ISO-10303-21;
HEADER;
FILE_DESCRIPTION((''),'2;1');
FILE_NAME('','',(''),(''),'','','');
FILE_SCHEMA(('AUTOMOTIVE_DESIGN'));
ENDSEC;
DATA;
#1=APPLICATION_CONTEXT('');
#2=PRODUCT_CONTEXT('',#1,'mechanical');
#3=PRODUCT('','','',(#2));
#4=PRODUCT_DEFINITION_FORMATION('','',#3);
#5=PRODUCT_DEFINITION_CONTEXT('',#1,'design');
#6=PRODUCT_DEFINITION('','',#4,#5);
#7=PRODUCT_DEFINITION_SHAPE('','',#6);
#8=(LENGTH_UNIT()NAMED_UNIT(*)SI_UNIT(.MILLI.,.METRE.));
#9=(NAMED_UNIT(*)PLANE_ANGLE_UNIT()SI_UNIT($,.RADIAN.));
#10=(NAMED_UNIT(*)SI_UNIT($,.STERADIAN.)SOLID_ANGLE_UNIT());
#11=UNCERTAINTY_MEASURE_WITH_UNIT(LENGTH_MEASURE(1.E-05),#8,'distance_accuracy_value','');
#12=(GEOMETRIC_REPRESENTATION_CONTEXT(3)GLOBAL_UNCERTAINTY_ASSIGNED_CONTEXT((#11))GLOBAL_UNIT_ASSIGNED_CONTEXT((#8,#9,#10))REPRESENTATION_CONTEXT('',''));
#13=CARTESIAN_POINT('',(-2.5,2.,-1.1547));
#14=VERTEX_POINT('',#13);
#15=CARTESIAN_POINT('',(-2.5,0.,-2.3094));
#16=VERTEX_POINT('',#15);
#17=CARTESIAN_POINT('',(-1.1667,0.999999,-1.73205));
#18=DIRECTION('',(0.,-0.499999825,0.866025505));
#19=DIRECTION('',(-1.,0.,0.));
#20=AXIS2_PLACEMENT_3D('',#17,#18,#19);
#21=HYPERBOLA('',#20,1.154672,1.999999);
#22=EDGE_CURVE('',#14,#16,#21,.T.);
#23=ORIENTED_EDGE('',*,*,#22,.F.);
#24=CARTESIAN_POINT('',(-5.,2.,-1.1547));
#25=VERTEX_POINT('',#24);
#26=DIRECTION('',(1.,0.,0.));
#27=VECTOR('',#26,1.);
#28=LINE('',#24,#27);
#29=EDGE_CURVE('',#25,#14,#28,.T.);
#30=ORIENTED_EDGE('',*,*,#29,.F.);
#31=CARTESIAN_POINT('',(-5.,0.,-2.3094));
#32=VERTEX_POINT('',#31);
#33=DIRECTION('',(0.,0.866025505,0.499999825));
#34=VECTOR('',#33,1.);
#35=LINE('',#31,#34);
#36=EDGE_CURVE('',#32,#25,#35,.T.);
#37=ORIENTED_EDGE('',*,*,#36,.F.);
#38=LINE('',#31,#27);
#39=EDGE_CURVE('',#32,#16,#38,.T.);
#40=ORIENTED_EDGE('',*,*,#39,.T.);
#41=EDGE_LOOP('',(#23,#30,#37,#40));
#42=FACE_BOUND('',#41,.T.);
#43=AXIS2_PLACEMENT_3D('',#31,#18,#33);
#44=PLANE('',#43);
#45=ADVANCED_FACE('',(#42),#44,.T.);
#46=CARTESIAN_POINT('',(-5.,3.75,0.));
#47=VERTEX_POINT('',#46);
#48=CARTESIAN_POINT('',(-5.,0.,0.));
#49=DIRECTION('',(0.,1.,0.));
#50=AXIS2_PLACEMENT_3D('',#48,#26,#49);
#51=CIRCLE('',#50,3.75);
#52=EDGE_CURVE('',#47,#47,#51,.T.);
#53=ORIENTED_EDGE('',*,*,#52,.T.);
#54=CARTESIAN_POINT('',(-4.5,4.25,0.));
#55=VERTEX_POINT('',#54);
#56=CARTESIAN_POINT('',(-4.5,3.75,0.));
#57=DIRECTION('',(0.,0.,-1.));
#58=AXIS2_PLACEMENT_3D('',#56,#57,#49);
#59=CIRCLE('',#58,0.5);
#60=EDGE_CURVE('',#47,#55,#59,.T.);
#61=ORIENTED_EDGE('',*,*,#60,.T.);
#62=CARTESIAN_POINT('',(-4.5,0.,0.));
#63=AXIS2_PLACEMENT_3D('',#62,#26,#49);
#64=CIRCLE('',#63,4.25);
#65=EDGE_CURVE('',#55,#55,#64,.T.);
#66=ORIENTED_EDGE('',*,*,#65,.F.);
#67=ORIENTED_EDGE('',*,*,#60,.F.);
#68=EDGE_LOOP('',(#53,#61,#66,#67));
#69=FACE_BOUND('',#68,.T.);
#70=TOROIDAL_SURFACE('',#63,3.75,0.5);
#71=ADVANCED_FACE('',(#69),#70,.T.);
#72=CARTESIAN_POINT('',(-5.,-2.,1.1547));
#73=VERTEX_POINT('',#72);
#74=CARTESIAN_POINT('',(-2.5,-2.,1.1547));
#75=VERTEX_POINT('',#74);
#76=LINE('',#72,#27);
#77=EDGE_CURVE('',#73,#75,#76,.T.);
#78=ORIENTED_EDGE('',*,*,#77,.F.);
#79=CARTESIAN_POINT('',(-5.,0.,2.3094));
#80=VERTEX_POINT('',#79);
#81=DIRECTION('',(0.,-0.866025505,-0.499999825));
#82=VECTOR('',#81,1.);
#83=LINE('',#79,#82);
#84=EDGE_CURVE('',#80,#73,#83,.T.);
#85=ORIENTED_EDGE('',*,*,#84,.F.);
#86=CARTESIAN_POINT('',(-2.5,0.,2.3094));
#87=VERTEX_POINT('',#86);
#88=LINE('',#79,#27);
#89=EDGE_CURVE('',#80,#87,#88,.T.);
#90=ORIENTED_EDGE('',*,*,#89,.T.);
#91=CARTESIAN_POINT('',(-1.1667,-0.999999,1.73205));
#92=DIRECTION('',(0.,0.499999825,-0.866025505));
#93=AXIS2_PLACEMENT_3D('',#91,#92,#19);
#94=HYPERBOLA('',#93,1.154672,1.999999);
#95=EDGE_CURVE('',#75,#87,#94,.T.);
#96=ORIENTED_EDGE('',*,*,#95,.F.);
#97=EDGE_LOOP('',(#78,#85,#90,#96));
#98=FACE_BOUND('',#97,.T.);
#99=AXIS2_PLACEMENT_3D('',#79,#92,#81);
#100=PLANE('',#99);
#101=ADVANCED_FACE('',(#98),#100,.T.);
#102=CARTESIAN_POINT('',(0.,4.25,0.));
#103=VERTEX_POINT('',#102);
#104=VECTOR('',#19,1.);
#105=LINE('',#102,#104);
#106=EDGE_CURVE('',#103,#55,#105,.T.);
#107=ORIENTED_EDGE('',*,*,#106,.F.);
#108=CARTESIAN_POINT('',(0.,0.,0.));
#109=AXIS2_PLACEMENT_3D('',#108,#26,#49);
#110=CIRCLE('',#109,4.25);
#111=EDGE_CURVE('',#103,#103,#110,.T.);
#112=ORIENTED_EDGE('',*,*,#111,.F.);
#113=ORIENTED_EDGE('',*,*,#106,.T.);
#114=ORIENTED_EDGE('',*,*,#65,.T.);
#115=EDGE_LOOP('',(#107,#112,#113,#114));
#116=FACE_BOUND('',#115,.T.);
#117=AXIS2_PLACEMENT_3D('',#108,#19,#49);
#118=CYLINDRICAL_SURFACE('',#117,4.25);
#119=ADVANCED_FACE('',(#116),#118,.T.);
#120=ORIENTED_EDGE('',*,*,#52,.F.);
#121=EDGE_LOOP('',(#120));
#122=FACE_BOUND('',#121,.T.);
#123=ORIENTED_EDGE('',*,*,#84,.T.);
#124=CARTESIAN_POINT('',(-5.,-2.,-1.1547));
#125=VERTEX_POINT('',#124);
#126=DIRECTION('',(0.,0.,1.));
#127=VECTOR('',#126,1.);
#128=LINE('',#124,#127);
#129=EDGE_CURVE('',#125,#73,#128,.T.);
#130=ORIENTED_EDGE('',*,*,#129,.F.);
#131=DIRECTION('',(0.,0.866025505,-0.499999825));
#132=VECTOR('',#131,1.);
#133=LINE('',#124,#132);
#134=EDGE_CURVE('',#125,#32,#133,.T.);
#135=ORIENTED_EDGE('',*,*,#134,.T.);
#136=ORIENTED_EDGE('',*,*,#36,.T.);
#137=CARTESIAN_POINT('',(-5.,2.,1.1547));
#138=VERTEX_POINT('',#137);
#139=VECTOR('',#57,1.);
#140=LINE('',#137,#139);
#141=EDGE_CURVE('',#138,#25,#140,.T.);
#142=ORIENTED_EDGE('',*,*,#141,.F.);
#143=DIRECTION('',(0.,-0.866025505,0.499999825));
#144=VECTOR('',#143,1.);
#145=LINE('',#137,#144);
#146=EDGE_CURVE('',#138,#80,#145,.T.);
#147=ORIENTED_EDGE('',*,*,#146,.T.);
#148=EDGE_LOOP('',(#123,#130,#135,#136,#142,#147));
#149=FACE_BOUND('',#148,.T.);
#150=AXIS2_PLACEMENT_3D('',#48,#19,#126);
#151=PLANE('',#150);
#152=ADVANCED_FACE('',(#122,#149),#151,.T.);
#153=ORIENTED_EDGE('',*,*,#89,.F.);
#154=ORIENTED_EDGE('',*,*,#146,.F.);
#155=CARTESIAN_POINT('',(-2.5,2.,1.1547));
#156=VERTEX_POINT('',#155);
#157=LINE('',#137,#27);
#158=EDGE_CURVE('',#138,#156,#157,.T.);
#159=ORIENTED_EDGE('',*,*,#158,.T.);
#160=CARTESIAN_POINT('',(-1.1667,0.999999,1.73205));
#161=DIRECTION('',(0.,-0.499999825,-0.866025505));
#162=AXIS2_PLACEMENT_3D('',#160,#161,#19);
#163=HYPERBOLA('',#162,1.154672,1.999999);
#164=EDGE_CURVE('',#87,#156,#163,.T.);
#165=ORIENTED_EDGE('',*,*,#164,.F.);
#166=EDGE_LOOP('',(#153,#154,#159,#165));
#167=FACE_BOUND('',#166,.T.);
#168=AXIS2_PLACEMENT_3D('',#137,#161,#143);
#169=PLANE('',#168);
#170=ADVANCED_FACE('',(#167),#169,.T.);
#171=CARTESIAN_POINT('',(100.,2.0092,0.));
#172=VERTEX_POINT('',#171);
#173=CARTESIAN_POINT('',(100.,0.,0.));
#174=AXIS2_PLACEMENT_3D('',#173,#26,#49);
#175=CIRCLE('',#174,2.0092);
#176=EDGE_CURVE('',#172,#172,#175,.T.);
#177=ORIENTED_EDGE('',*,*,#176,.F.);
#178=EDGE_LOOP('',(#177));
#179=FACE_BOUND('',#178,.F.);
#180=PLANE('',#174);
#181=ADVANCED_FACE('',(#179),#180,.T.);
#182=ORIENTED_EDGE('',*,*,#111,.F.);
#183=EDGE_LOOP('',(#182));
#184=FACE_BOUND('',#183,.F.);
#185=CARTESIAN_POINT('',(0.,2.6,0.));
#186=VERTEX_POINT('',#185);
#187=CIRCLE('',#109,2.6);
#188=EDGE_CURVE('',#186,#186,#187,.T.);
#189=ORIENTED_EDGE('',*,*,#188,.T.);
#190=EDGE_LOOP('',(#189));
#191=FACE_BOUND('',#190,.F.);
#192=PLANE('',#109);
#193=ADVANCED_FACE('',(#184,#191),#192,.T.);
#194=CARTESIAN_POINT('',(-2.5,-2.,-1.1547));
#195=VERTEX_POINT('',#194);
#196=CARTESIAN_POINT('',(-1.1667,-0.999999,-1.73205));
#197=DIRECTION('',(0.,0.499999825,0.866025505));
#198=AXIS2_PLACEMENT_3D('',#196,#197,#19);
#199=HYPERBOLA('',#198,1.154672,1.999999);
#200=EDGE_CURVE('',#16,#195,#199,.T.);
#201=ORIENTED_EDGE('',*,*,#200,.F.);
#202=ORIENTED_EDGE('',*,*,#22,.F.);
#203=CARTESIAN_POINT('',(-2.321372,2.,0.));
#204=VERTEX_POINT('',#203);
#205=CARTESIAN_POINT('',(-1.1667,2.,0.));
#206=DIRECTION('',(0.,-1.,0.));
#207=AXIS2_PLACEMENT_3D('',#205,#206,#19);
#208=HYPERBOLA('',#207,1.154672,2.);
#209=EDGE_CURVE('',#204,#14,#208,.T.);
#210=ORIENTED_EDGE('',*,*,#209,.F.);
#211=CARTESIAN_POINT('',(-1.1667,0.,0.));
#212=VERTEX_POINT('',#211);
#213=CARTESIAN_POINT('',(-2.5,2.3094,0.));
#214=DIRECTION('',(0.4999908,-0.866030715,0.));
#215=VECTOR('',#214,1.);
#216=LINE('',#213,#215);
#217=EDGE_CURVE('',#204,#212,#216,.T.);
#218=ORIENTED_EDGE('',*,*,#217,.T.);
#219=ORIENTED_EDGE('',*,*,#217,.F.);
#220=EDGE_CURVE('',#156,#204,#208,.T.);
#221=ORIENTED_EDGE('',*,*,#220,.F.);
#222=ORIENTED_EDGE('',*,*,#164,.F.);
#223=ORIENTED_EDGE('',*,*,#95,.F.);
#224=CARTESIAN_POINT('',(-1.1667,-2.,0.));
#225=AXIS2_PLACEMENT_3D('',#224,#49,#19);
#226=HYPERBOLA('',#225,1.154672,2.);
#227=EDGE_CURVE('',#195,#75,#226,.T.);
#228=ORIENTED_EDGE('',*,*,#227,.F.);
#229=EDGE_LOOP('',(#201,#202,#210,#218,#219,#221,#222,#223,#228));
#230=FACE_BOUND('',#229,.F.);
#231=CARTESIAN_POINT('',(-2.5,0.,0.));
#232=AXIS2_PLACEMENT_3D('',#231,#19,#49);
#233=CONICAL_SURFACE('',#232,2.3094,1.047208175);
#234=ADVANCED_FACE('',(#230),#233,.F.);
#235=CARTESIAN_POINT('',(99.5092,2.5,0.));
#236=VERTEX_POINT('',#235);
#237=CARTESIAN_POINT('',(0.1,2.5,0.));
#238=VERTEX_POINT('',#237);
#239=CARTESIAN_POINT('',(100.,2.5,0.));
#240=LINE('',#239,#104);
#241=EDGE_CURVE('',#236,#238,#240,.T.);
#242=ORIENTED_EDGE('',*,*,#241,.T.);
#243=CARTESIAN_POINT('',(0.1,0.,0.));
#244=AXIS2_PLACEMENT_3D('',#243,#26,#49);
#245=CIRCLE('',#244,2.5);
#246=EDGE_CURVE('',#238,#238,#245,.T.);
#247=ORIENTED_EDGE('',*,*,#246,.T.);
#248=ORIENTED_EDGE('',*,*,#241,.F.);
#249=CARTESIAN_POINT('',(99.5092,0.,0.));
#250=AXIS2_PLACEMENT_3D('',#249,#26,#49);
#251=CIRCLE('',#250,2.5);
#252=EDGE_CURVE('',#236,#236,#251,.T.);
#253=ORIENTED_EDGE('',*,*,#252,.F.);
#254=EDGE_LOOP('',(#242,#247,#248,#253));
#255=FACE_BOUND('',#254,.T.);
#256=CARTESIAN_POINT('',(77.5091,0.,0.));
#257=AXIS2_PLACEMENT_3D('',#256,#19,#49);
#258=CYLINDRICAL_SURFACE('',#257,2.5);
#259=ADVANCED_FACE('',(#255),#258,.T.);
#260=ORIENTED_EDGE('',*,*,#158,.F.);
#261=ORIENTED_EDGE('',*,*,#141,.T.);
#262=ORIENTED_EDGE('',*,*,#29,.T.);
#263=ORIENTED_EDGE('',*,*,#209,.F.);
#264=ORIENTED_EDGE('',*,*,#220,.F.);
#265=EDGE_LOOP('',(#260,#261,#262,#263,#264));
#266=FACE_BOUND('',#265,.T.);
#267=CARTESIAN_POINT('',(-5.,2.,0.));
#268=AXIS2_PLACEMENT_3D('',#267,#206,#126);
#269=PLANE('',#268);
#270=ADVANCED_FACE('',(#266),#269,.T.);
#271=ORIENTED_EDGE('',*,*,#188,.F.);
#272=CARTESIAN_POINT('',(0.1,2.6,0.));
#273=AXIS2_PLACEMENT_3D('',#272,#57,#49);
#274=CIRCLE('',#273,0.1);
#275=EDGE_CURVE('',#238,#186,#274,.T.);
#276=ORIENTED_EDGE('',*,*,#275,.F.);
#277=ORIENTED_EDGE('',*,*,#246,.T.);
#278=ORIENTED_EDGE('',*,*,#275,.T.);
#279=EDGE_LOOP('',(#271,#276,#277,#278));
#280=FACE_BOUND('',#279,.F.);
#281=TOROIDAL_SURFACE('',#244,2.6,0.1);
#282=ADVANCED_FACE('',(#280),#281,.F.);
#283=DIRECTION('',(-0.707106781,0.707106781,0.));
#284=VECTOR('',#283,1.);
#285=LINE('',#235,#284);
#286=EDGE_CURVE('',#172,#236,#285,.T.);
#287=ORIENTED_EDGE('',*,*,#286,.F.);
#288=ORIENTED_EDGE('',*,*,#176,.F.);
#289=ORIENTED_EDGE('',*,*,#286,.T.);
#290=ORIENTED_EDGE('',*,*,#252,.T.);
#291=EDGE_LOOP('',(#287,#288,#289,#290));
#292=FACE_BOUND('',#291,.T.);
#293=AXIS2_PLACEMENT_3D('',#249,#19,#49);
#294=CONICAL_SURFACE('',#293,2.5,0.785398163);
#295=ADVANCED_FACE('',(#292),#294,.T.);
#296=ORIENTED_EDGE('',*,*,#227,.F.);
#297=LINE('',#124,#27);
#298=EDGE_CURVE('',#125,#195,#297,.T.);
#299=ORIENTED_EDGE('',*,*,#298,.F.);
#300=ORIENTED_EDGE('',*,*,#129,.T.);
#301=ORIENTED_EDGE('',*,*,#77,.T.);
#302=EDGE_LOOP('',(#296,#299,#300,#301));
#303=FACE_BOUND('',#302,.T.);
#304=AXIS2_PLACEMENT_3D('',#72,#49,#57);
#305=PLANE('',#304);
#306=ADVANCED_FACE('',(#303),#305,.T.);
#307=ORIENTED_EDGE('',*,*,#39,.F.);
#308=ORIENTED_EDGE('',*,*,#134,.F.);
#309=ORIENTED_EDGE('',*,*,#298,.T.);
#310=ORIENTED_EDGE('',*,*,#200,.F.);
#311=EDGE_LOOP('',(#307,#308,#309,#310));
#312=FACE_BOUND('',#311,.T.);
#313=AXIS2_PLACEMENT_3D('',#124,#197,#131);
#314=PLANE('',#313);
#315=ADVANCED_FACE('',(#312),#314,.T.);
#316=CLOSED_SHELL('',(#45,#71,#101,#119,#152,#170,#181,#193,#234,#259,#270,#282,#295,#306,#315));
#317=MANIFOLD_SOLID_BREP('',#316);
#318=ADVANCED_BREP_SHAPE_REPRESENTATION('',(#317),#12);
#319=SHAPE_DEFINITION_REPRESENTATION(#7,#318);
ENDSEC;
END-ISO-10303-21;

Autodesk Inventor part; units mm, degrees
ref_plane "YZ Plane" through (0, 0, 0) normal (1, 0, 0) x (0, 1, 0)
ref_plane "XZ Plane" through (0, 0, 0) normal (0, 1, 0) x (-1, 0, 0)
sketch "Sketch1" plane through (0, 0, 0) normal (0, 0, 1) x (1, 0, 0)
  line L0 (-1.1667, 0) -> (100, 0)
  line L1 (100, 0) -> (100, 2.5)
  line L2 (100, 2.5) -> (78, 2.5)
  line L3 (78, 2.5) -> (77.5091, 2.5)
  line L4 (77.5091, 2.5) -> (0, 2.5)
  line L5 (0, 2.5) -> (0, 4.25)
  line L6 (0, 4.25) -> (-5, 4.25)
  line L7 (-5, 4.25) -> (-5, 2.3094)
  line L8 (-5, 2.3094) -> (-2.5, 2.3094)
  line L9 (-2.5, 2.3094) -> (-1.1667, 0)
  line L10 (-26, 0) -> (121, 0) projected
  line L11 (0, -0.85) -> (0, 5.1) projected
  line L12 (78, 2.5) -> (0, 2.5) construction
  dimension "d1" = 22
  dimension "d2" = 0.4909
  dimension "d3" = 5
  dimension "d4" = 2.5
  dimension "d5" = 60
  dimension "d6" = 5
  dimension "d7" = 5
  dimension "d8" = 4.6188
  dimension "d9" = 8.5
  dimension "d26" = 100
revolve "Body" add sketch "Sketch1" angle 360 about axis through (-1.1667, 0, 0) along (1, 0, 0)
sketch "Sketch2" plane through (-5, 0, 0) normal (-1, 0, 0) x (0, 0, 1)
  circle A0 centre (0, 0) radius 2.3094 projected
  line L0 (0, -5.95) -> (0, 5.95) projected
  line L1 (-5.95, 0) -> (5.95, 0) projected
  line L2 (2.3094, 0) -> (1.1547, -2)
  line L3 (1.1547, -2) -> (-1.1547, -2)
  line L4 (-1.1547, -2) -> (-2.3094, 0)
  line L5 (-2.3094, 0) -> (-1.1547, 2)
  line L6 (-1.1547, 2) -> (1.1547, 2)
  line L7 (1.1547, 2) -> (2.3094, 0)
extrude "Slot" add sketch "Sketch2" against normal up to next contours L7 A0 | A0 L2 | L6 L0 A0 | A0 L0 L3 | L0 L6 A0 | A0 L3 L0 | L4 A0 | A0 L5
fillet "Fillet1" radius 0.5 1 edges at (-5, -4.25, 0)
thread "Thread" size "M5x0.8" class "6g" standard "ISO Metric profile" length 22
chamfer "Chamfer1" distance 0.4908 distance2 0.4908 1 edges at (100, -2.5, 0) measured on face at (100, 0.2353, -0.3409)
ref_plane "Work Plane1" through (29, 0, 0) normal (0, -1, 0) x (1, 0, 0)
fillet "Fillet2" radius 0.1 1 edges at (0, -2.5, 0)
equation "\"d30\" = R"
equation "\"d17\" = RR"
equation "\"d13\" = GEL"
equation "\"d15\" = -0.5 * SPD + 0.5 * GD"
equation "\"d16\" = GUL"
equation "\"d1\" = GEL"
equation "\"d3\" = KOH"
equation "\"d4\" = INTI"
equation "\"d6\" = GD"
equation "\"d7\" = BDM"
equation "\"d8\" = 1.1547 * SW"
equation "\"d9\" = KOD"
equation "\"d26\" = NLG"
equation "\"GD\" = NND"
equation "\"NLG\" = 100"
equation "\"GEL\" = 22"
equation "\"KOD\" = 8.5"
equation "\"KOH\" = 5"
equation "\"INTI\" = 2.5"
equation "\"GAL\" = 0.61345 * PTC"
equation "\"GUL\" = 0.61345 * PTC"
equation "\"BDM\" = NND"
equation "\"SW\" = 4"
equation "\"RR\" = 0.5"
equation "\"SPD\" = 4.01848"
equation "\"R\" = 0.1"
equation "\"TOA\" = 30deg"
equation "\"THREADDIA\" = 5"
equation "\"PTC\" = 0.8"
equation "\"NND\" = 5"
equation "\"E0\" = 1.155 * SW"
equation "\"GD1\" = THREADDIA - 1.2269 * PTC"
properties part number "ANSI B18.3.1M - M5x0.8 x 100, FSHCSM" material "Steel, Mild"
